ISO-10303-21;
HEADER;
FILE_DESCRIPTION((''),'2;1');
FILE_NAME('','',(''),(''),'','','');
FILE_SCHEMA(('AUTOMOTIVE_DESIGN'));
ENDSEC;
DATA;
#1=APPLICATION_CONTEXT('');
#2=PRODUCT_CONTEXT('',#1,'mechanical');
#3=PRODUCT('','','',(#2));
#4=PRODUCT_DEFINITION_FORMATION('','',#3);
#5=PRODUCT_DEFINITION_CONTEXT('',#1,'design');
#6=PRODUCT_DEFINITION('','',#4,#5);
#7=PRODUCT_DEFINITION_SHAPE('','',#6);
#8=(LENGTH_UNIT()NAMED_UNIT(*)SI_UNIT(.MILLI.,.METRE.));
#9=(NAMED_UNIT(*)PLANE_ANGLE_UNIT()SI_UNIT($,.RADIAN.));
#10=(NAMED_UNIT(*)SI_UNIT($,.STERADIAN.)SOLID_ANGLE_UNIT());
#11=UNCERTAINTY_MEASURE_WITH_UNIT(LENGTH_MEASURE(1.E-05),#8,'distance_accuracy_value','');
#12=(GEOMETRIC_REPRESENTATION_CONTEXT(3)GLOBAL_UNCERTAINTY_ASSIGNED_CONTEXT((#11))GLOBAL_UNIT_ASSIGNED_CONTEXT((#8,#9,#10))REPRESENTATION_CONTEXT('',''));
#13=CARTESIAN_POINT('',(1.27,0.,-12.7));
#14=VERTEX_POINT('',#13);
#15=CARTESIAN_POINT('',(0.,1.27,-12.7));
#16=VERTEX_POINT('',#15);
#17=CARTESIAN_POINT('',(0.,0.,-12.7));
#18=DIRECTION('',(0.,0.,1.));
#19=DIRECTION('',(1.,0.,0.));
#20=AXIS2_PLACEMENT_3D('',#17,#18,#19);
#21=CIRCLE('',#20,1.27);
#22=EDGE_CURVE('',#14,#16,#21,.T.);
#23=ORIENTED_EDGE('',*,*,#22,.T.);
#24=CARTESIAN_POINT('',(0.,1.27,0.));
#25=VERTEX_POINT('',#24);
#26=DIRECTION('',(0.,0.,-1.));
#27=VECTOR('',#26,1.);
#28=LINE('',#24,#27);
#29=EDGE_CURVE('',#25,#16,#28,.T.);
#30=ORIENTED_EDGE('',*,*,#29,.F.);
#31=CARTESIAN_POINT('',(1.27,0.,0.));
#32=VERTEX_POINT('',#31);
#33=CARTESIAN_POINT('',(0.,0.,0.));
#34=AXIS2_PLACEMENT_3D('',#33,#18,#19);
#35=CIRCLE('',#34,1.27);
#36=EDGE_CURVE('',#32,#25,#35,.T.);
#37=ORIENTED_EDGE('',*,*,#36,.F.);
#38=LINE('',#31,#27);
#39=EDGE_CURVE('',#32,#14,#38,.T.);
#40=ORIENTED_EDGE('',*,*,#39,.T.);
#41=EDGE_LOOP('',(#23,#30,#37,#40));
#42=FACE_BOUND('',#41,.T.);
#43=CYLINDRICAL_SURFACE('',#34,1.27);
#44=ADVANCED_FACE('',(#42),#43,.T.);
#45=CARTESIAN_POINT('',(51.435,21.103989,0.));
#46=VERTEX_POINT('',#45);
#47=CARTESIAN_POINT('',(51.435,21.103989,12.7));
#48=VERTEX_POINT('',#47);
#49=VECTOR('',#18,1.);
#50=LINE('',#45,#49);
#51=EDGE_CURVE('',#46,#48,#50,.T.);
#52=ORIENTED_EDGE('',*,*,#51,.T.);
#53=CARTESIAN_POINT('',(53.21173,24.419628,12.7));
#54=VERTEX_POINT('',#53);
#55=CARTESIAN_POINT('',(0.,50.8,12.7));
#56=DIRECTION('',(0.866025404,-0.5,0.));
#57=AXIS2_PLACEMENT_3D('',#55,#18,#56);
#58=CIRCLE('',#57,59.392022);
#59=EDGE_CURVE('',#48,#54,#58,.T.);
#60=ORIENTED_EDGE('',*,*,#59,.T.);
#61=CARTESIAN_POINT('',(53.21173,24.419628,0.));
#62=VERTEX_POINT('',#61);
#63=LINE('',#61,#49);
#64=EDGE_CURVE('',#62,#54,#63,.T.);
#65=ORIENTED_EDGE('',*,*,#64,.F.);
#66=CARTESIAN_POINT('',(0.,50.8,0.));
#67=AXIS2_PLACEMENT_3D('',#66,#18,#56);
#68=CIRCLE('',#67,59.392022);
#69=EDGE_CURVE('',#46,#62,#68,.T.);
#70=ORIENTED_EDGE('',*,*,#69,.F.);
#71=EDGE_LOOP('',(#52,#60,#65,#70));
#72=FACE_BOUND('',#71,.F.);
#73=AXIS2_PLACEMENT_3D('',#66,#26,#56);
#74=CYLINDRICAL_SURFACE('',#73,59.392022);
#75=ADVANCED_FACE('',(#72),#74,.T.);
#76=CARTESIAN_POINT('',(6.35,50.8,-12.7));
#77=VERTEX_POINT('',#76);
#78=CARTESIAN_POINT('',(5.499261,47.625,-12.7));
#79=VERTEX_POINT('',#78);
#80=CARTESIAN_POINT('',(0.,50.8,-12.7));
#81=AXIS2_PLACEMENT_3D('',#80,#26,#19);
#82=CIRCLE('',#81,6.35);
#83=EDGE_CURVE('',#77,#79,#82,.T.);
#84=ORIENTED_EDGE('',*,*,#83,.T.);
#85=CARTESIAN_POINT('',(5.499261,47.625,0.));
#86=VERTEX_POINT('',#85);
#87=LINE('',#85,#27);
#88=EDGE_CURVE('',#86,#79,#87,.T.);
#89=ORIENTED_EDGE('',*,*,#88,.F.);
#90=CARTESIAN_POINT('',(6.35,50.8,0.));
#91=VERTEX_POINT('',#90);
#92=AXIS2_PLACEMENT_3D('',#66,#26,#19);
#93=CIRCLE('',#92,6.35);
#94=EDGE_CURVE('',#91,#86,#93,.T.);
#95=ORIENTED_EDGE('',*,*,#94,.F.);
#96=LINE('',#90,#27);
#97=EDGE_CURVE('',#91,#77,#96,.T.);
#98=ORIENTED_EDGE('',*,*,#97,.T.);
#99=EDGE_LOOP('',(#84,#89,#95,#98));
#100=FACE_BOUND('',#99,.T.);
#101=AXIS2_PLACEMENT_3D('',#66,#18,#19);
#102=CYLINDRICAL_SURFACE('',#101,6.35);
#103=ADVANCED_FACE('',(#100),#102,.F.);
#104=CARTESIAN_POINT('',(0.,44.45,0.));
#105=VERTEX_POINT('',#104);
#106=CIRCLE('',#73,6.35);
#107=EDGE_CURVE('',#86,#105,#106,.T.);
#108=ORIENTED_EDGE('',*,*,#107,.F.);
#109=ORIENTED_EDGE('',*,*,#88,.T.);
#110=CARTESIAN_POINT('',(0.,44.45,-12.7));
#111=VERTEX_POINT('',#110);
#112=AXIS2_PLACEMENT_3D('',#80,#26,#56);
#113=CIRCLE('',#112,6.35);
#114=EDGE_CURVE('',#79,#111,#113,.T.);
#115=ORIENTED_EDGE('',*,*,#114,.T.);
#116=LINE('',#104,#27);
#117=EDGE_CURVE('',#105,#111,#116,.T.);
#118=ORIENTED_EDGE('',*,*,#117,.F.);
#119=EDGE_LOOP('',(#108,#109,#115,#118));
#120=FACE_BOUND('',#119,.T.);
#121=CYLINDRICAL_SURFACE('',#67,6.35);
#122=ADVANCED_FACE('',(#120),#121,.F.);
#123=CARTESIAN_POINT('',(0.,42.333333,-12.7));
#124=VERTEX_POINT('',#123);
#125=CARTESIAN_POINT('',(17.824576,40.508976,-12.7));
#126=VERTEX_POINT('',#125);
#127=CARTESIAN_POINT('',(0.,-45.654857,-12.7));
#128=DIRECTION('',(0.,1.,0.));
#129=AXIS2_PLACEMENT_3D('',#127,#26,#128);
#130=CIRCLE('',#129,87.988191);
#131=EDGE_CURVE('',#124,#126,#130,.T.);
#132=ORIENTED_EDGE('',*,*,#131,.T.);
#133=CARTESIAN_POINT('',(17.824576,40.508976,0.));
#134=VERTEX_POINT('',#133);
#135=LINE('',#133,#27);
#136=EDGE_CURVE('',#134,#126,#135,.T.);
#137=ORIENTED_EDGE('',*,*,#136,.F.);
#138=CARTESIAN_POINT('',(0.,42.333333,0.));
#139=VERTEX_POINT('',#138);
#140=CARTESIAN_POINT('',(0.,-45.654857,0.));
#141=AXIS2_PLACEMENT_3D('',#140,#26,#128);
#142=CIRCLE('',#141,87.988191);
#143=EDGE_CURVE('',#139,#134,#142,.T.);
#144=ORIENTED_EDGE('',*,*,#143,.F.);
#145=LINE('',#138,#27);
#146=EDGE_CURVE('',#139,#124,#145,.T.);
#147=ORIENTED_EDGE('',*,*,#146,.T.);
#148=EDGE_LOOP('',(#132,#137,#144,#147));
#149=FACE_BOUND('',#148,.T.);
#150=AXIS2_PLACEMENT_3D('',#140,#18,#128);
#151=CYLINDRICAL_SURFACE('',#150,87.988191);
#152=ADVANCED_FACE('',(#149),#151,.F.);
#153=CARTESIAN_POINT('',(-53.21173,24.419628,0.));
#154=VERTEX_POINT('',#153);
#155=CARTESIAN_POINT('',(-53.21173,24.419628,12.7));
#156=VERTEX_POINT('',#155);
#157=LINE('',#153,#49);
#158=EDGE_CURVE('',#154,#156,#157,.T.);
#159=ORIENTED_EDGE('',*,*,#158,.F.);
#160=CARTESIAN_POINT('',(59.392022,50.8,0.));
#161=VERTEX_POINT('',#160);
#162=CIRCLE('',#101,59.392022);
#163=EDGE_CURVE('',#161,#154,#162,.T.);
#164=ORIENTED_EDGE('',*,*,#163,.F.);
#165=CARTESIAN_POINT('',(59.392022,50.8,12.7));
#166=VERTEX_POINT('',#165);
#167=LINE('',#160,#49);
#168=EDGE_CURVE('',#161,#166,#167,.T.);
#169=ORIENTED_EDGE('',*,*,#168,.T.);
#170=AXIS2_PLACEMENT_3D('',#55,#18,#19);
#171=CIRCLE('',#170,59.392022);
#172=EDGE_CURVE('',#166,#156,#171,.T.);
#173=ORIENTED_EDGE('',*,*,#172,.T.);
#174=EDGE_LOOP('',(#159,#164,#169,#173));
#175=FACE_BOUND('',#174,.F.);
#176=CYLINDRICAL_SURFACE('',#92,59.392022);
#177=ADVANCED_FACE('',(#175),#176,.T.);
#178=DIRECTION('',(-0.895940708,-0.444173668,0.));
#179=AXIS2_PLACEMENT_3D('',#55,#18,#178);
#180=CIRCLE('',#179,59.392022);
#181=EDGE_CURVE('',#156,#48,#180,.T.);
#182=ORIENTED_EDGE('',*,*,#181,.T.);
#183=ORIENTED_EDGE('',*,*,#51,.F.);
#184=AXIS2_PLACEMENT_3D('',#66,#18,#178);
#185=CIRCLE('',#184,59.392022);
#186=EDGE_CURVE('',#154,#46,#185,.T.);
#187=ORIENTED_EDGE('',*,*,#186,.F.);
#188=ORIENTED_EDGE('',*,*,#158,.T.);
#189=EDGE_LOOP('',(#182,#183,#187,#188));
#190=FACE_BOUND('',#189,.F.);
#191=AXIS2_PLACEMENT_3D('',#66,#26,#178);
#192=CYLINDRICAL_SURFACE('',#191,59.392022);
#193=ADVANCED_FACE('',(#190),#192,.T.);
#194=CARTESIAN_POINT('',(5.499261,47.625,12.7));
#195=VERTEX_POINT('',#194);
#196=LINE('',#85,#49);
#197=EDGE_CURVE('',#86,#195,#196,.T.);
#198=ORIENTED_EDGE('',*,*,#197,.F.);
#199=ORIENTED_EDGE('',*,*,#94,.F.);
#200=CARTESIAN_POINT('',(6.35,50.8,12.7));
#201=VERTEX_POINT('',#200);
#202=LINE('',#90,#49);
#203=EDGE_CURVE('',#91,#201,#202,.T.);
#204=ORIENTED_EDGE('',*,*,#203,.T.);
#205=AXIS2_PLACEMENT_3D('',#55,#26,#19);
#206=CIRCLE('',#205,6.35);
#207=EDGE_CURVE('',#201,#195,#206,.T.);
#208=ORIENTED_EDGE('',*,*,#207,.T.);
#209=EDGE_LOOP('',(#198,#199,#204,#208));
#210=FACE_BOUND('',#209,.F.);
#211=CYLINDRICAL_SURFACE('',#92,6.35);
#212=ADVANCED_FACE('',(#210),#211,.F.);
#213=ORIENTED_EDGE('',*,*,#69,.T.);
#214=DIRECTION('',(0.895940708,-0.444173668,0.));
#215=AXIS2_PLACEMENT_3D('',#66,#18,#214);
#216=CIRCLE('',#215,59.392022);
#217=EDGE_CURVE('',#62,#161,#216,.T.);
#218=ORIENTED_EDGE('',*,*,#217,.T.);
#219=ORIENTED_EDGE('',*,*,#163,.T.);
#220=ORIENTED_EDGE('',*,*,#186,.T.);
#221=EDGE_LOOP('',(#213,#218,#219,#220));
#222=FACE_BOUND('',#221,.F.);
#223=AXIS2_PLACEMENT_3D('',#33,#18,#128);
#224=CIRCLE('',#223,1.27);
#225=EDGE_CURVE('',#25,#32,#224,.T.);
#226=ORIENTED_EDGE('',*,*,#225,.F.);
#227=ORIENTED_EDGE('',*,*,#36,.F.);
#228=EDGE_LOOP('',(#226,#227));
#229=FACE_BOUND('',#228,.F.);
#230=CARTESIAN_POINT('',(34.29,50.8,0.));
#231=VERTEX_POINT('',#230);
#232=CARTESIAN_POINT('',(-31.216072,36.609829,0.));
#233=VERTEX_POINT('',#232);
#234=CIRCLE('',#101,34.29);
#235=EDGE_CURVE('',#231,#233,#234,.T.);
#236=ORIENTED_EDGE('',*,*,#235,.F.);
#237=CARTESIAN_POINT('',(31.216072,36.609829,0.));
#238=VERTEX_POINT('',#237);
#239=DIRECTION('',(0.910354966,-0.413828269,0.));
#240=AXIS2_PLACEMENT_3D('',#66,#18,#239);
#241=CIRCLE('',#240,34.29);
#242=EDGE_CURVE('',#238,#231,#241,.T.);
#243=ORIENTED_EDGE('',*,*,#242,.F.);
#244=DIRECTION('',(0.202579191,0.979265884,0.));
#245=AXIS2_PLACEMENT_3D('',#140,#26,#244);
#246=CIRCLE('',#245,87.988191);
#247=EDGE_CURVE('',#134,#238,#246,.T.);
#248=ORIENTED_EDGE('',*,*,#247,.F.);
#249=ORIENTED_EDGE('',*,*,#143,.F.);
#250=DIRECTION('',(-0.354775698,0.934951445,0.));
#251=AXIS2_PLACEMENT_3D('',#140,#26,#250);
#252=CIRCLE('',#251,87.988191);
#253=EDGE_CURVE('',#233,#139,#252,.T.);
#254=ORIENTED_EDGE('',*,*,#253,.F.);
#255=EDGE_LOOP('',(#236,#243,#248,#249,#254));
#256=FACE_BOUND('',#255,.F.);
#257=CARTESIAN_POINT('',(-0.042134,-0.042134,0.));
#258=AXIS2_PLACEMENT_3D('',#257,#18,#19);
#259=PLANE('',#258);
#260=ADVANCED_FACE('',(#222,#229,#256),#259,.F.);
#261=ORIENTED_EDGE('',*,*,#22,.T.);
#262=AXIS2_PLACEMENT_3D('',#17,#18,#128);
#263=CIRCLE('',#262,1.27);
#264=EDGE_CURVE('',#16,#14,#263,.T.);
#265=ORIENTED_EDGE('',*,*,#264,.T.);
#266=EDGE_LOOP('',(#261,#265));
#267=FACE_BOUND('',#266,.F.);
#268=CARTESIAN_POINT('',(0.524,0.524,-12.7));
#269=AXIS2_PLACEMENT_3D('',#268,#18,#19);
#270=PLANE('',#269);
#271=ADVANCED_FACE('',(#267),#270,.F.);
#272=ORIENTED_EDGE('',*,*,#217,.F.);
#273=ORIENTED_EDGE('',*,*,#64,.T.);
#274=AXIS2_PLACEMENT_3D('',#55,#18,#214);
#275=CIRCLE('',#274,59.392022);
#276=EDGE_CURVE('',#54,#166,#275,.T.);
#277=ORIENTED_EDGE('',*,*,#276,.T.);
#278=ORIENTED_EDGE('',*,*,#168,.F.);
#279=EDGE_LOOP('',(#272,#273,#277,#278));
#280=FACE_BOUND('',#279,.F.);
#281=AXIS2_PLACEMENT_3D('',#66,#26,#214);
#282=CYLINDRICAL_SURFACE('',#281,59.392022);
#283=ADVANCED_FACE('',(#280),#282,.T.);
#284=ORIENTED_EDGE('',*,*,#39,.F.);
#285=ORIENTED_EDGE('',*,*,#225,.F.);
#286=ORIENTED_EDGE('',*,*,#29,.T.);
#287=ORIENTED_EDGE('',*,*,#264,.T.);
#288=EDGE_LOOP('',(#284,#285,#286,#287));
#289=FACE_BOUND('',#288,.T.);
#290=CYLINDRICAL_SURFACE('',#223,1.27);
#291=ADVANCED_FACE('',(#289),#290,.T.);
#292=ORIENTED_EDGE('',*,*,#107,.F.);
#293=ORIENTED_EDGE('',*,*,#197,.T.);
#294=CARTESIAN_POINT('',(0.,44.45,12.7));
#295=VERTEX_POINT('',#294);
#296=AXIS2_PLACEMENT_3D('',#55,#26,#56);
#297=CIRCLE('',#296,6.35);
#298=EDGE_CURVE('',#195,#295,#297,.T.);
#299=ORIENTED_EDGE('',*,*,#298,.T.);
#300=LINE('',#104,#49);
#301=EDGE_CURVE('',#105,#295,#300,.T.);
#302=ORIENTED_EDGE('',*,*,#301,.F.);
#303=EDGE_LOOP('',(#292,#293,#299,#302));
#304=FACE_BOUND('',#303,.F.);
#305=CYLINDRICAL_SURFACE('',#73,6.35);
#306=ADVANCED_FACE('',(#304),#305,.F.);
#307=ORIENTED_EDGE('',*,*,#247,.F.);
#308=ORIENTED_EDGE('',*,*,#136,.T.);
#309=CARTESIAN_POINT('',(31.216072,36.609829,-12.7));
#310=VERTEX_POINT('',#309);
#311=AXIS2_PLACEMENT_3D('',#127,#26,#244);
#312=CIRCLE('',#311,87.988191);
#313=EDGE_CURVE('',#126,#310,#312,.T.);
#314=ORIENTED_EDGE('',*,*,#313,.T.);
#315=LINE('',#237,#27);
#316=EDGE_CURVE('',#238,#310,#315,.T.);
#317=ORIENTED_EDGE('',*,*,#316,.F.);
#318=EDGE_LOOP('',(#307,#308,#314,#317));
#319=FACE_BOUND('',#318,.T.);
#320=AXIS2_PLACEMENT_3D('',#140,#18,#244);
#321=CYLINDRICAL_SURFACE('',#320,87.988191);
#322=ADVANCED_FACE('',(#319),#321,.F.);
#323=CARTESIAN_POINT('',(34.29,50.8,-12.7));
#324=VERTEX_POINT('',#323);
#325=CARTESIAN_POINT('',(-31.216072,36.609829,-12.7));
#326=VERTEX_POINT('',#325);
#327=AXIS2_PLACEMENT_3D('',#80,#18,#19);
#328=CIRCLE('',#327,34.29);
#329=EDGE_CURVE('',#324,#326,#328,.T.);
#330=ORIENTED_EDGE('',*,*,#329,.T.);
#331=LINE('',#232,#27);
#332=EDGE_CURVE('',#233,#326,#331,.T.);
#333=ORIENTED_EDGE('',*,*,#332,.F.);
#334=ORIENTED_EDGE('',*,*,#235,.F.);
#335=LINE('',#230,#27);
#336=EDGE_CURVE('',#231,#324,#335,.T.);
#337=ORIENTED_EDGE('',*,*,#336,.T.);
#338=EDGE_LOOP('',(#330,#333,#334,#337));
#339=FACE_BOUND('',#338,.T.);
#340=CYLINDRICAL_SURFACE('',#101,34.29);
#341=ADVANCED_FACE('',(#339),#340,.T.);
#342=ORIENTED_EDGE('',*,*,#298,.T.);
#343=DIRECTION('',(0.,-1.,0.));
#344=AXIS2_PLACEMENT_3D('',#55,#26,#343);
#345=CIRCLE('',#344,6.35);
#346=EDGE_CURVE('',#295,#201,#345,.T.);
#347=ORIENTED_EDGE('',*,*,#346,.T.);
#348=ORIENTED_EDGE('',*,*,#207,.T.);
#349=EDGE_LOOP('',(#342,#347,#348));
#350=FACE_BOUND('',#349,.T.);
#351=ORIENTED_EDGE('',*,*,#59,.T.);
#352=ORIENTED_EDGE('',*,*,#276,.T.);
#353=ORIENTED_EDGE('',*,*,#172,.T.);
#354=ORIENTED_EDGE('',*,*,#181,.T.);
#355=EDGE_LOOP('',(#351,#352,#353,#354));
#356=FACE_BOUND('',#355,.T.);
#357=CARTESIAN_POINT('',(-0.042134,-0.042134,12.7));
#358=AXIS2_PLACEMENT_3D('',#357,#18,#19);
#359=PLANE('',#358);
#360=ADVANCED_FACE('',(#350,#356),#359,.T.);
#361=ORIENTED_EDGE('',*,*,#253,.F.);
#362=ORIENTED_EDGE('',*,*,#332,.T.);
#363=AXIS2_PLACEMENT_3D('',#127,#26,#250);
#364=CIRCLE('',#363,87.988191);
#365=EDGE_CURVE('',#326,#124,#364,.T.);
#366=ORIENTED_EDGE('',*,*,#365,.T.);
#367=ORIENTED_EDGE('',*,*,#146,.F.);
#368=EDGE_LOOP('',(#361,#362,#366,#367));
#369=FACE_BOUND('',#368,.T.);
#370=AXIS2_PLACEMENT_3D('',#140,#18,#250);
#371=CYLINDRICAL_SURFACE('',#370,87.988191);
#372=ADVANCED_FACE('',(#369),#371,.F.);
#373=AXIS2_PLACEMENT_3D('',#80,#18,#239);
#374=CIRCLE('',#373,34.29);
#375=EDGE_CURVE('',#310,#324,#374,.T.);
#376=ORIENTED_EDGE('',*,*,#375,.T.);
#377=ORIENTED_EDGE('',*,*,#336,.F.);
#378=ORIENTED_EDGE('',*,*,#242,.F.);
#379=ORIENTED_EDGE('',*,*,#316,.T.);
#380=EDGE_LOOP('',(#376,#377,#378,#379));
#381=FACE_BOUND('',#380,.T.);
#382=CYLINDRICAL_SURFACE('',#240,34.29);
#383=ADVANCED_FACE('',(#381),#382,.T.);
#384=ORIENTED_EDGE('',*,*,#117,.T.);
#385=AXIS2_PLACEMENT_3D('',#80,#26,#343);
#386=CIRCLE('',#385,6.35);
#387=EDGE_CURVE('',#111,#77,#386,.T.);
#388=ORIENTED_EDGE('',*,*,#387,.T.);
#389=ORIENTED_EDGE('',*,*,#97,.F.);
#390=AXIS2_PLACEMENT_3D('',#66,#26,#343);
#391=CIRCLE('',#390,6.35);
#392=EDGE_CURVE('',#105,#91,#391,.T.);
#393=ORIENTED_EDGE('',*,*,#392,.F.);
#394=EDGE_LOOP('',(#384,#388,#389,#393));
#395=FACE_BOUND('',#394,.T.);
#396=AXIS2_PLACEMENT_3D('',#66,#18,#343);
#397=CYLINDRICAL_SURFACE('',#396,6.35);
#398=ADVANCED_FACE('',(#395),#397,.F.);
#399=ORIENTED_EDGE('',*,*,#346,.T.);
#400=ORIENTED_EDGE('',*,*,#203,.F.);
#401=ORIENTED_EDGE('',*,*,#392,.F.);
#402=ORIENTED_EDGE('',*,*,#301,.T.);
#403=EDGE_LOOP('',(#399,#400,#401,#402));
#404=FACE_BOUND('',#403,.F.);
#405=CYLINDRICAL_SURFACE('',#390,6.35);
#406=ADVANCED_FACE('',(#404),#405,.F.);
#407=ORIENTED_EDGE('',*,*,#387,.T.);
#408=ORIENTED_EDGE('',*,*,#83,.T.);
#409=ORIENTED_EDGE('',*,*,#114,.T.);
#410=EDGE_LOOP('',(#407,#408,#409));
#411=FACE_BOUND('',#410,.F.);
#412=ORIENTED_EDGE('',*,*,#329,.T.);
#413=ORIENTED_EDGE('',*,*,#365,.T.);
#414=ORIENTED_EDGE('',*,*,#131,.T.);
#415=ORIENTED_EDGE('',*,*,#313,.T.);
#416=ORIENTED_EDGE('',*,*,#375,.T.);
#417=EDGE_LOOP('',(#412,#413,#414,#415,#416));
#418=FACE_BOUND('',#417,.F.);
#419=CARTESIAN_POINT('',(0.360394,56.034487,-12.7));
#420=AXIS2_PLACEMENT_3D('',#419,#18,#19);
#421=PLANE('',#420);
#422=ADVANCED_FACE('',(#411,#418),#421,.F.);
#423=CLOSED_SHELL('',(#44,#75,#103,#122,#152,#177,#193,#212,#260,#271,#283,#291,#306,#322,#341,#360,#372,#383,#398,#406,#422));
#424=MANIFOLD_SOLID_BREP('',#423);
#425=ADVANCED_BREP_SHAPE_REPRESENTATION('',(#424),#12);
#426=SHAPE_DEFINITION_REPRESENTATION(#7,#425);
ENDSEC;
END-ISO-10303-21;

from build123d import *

# Parameters (mm, degrees)
F1_DEPTH = 12.7
F2_DEPTH = 12.7


with BuildPart() as f1:
    # F0 (on Top) → F1 (new body)
    with BuildSketch(Plane.XY):
        with BuildLine():
            Line((1.27, 0), (0, 0))
            Line((0, 0), (0, 1.27))
            ThreePointArc((0, 1.27), (-0.8980256121, -0.8980256121), (1.27, 0))
        make_face()
        with BuildLine():
            Line((0, 1.27), (0, 0))
            Line((0, 0), (1.27, 0))
            ThreePointArc((1.27, 0), (0.8980256121, 0.8980256121), (0, 1.27))
        make_face()
        with BuildLine():
            ThreePointArc((1.27, 0), (-0.8980256121, -0.8980256121), (0, 1.27))
            Line((0, 1.27), (0, 16.51))
            ThreePointArc((0, 16.51), (-18.5637162853, 21.9695900536), (-31.2160717781, 36.6098286569))
            ThreePointArc((-31.2160717781, 36.6098286569), (-42.6516552572, 31.3045995485), (-53.2117304222, 24.4196276597))
            ThreePointArc((-53.2117304222, 24.4196276597), (-16.5828563916, -6.2300023956), (30.7696652459, 0))
            Line((30.7696652459, 0), (1.27, 0))
        make_face()
        with BuildLine():
            Line((0, 16.51), (0, 1.27))
            ThreePointArc((0, 1.27), (0.8980256121, 0.8980256121), (1.27, 0))
            Line((1.27, 0), (30.7696652459, 0))
            ThreePointArc((30.7696652459, 0), (42.4352015878, 9.2468296571), (51.4349999952, 21.103988907))
            Line((51.4349999952, 21.103988907), (29.6960110958, 33.655))
            ThreePointArc((29.6960110958, 33.655), (17.145, 21.1039889042), (0, 16.51))
        make_face()
        with BuildLine():
            ThreePointArc((-31.2160717781, 36.6098286569), (-18.5637162853, 21.9695900536), (0, 16.51))
            Line((0, 16.51), (0, 42.3333333333))
            ThreePointArc((0, 42.3333333333), (-15.8682201509, 40.8906294723), (-31.2160717781, 36.6098286569))
        make_face()
        with BuildLine():
            Line((0, 42.3333333333), (0, 16.51))
            ThreePointArc((0, 16.51), (17.145, 21.1039889042), (29.6960110958, 33.655))
            Line((29.6960110958, 33.655), (17.8245764663, 40.508975979))
            ThreePointArc((17.8245764663, 40.508975979), (8.9588476653, 41.8760557513), (0, 42.3333333333))
        make_face()
        with BuildLine():
            ThreePointArc((-31.2160717781, 36.6098286569), (-15.8682201509, 40.8906294723), (0, 42.3333333333))
            Line((0, 42.3333333333), (0, 44.45))
            ThreePointArc((0, 44.45), (-4.4901280605, 55.2901280605), (6.35, 50.8))
            ThreePointArc((6.35, 50.8), (6.1336289969, 49.1564990636), (5.499261314, 47.625))
            Line((5.499261314, 47.625), (17.8245764663, 40.508975979))
            ThreePointArc((17.8245764663, 40.508975979), (24.5977058385, 38.8251673187), (31.2160717781, 36.6098286569))
            ThreePointArc((31.2160717781, 36.6098286569), (33.5127080469, 43.5403512919), (34.29, 50.8))
            ThreePointArc((34.29, 50.8), (-7.2596487081, 84.3127080469), (-31.2160717781, 36.6098286569))
        make_face()
        with BuildLine():
            Line((0, 44.45), (0, 42.3333333333))
            ThreePointArc((0, 42.3333333333), (8.9588476653, 41.8760557513), (17.8245764663, 40.508975979))
            Line((17.8245764663, 40.508975979), (5.499261314, 47.625))
            ThreePointArc((5.499261314, 47.625), (3.175, 45.300738686), (0, 44.45))
        make_face()
        with BuildLine():
            ThreePointArc((-53.2117304222, 24.4196276597), (-42.6516552572, 31.3045995485), (-31.2160717781, 36.6098286569))
            ThreePointArc((-31.2160717781, 36.6098286569), (-7.2596487081, 84.3127080469), (34.29, 50.8))
            ThreePointArc((34.29, 50.8), (33.5127080469, 43.5403512919), (31.2160717781, 36.6098286569))
            ThreePointArc((31.2160717781, 36.6098286569), (42.6516552572, 31.3045995485), (53.2117304222, 24.4196276597))
            ThreePointArc((53.2117304222, 24.4196276597), (57.8263113692, 37.2526750694), (59.392022186, 50.8))
            ThreePointArc((59.392022186, 50.8), (-13.5473249306, 108.6263113692), (-53.2117304222, 24.4196276597))
        make_face()
        with BuildLine():
            ThreePointArc((31.2160717781, 36.6098286569), (30.4918548649, 35.1139907276), (29.6960110958, 33.655))
            Line((29.6960110958, 33.655), (51.4349999952, 21.103988907))
            ThreePointArc((51.4349999952, 21.103988907), (52.3496218883, 22.7477382821), (53.2117304222, 24.4196276597))
            ThreePointArc((53.2117304222, 24.4196276597), (42.6516552572, 31.3045995485), (31.2160717781, 36.6098286569))
        make_face()
        with BuildLine():
            Line((17.8245764663, 40.508975979), (29.6960110958, 33.655))
            ThreePointArc((29.6960110958, 33.655), (30.4918548649, 35.1139907276), (31.2160717781, 36.6098286569))
            ThreePointArc((31.2160717781, 36.6098286569), (24.5977058385, 38.8251673187), (17.8245764663, 40.508975979))
        make_face()
    extrude(amount=F1_DEPTH)

    # F0 (on Top) → F2 (join)
    with BuildSketch(Plane.XY):
        with BuildLine():
            Line((0, 1.27), (0, 0))
            Line((0, 0), (1.27, 0))
            ThreePointArc((1.27, 0), (0.8980256121, 0.8980256121), (0, 1.27))
        make_face()
        with BuildLine():
            Line((1.27, 0), (0, 0))
            Line((0, 0), (0, 1.27))
            ThreePointArc((0, 1.27), (-0.8980256121, -0.8980256121), (1.27, 0))
        make_face()
        with BuildLine():
            ThreePointArc((-31.2160717781, 36.6098286569), (-15.8682201509, 40.8906294723), (0, 42.3333333333))
            Line((0, 42.3333333333), (0, 44.45))
            ThreePointArc((0, 44.45), (-4.4901280605, 55.2901280605), (6.35, 50.8))
            ThreePointArc((6.35, 50.8), (6.1336289969, 49.1564990636), (5.499261314, 47.625))
            Line((5.499261314, 47.625), (17.8245764663, 40.508975979))
            ThreePointArc((17.8245764663, 40.508975979), (24.5977058385, 38.8251673187), (31.2160717781, 36.6098286569))
            ThreePointArc((31.2160717781, 36.6098286569), (33.5127080469, 43.5403512919), (34.29, 50.8))
            ThreePointArc((34.29, 50.8), (-7.2596487081, 84.3127080469), (-31.2160717781, 36.6098286569))
        make_face()
        with BuildLine():
            Line((0, 44.45), (0, 42.3333333333))
            ThreePointArc((0, 42.3333333333), (8.9588476653, 41.8760557513), (17.8245764663, 40.508975979))
            Line((17.8245764663, 40.508975979), (5.499261314, 47.625))
            ThreePointArc((5.499261314, 47.625), (3.175, 45.300738686), (0, 44.45))
        make_face()
    extrude(amount=-F2_DEPTH)


solid = f1.part
